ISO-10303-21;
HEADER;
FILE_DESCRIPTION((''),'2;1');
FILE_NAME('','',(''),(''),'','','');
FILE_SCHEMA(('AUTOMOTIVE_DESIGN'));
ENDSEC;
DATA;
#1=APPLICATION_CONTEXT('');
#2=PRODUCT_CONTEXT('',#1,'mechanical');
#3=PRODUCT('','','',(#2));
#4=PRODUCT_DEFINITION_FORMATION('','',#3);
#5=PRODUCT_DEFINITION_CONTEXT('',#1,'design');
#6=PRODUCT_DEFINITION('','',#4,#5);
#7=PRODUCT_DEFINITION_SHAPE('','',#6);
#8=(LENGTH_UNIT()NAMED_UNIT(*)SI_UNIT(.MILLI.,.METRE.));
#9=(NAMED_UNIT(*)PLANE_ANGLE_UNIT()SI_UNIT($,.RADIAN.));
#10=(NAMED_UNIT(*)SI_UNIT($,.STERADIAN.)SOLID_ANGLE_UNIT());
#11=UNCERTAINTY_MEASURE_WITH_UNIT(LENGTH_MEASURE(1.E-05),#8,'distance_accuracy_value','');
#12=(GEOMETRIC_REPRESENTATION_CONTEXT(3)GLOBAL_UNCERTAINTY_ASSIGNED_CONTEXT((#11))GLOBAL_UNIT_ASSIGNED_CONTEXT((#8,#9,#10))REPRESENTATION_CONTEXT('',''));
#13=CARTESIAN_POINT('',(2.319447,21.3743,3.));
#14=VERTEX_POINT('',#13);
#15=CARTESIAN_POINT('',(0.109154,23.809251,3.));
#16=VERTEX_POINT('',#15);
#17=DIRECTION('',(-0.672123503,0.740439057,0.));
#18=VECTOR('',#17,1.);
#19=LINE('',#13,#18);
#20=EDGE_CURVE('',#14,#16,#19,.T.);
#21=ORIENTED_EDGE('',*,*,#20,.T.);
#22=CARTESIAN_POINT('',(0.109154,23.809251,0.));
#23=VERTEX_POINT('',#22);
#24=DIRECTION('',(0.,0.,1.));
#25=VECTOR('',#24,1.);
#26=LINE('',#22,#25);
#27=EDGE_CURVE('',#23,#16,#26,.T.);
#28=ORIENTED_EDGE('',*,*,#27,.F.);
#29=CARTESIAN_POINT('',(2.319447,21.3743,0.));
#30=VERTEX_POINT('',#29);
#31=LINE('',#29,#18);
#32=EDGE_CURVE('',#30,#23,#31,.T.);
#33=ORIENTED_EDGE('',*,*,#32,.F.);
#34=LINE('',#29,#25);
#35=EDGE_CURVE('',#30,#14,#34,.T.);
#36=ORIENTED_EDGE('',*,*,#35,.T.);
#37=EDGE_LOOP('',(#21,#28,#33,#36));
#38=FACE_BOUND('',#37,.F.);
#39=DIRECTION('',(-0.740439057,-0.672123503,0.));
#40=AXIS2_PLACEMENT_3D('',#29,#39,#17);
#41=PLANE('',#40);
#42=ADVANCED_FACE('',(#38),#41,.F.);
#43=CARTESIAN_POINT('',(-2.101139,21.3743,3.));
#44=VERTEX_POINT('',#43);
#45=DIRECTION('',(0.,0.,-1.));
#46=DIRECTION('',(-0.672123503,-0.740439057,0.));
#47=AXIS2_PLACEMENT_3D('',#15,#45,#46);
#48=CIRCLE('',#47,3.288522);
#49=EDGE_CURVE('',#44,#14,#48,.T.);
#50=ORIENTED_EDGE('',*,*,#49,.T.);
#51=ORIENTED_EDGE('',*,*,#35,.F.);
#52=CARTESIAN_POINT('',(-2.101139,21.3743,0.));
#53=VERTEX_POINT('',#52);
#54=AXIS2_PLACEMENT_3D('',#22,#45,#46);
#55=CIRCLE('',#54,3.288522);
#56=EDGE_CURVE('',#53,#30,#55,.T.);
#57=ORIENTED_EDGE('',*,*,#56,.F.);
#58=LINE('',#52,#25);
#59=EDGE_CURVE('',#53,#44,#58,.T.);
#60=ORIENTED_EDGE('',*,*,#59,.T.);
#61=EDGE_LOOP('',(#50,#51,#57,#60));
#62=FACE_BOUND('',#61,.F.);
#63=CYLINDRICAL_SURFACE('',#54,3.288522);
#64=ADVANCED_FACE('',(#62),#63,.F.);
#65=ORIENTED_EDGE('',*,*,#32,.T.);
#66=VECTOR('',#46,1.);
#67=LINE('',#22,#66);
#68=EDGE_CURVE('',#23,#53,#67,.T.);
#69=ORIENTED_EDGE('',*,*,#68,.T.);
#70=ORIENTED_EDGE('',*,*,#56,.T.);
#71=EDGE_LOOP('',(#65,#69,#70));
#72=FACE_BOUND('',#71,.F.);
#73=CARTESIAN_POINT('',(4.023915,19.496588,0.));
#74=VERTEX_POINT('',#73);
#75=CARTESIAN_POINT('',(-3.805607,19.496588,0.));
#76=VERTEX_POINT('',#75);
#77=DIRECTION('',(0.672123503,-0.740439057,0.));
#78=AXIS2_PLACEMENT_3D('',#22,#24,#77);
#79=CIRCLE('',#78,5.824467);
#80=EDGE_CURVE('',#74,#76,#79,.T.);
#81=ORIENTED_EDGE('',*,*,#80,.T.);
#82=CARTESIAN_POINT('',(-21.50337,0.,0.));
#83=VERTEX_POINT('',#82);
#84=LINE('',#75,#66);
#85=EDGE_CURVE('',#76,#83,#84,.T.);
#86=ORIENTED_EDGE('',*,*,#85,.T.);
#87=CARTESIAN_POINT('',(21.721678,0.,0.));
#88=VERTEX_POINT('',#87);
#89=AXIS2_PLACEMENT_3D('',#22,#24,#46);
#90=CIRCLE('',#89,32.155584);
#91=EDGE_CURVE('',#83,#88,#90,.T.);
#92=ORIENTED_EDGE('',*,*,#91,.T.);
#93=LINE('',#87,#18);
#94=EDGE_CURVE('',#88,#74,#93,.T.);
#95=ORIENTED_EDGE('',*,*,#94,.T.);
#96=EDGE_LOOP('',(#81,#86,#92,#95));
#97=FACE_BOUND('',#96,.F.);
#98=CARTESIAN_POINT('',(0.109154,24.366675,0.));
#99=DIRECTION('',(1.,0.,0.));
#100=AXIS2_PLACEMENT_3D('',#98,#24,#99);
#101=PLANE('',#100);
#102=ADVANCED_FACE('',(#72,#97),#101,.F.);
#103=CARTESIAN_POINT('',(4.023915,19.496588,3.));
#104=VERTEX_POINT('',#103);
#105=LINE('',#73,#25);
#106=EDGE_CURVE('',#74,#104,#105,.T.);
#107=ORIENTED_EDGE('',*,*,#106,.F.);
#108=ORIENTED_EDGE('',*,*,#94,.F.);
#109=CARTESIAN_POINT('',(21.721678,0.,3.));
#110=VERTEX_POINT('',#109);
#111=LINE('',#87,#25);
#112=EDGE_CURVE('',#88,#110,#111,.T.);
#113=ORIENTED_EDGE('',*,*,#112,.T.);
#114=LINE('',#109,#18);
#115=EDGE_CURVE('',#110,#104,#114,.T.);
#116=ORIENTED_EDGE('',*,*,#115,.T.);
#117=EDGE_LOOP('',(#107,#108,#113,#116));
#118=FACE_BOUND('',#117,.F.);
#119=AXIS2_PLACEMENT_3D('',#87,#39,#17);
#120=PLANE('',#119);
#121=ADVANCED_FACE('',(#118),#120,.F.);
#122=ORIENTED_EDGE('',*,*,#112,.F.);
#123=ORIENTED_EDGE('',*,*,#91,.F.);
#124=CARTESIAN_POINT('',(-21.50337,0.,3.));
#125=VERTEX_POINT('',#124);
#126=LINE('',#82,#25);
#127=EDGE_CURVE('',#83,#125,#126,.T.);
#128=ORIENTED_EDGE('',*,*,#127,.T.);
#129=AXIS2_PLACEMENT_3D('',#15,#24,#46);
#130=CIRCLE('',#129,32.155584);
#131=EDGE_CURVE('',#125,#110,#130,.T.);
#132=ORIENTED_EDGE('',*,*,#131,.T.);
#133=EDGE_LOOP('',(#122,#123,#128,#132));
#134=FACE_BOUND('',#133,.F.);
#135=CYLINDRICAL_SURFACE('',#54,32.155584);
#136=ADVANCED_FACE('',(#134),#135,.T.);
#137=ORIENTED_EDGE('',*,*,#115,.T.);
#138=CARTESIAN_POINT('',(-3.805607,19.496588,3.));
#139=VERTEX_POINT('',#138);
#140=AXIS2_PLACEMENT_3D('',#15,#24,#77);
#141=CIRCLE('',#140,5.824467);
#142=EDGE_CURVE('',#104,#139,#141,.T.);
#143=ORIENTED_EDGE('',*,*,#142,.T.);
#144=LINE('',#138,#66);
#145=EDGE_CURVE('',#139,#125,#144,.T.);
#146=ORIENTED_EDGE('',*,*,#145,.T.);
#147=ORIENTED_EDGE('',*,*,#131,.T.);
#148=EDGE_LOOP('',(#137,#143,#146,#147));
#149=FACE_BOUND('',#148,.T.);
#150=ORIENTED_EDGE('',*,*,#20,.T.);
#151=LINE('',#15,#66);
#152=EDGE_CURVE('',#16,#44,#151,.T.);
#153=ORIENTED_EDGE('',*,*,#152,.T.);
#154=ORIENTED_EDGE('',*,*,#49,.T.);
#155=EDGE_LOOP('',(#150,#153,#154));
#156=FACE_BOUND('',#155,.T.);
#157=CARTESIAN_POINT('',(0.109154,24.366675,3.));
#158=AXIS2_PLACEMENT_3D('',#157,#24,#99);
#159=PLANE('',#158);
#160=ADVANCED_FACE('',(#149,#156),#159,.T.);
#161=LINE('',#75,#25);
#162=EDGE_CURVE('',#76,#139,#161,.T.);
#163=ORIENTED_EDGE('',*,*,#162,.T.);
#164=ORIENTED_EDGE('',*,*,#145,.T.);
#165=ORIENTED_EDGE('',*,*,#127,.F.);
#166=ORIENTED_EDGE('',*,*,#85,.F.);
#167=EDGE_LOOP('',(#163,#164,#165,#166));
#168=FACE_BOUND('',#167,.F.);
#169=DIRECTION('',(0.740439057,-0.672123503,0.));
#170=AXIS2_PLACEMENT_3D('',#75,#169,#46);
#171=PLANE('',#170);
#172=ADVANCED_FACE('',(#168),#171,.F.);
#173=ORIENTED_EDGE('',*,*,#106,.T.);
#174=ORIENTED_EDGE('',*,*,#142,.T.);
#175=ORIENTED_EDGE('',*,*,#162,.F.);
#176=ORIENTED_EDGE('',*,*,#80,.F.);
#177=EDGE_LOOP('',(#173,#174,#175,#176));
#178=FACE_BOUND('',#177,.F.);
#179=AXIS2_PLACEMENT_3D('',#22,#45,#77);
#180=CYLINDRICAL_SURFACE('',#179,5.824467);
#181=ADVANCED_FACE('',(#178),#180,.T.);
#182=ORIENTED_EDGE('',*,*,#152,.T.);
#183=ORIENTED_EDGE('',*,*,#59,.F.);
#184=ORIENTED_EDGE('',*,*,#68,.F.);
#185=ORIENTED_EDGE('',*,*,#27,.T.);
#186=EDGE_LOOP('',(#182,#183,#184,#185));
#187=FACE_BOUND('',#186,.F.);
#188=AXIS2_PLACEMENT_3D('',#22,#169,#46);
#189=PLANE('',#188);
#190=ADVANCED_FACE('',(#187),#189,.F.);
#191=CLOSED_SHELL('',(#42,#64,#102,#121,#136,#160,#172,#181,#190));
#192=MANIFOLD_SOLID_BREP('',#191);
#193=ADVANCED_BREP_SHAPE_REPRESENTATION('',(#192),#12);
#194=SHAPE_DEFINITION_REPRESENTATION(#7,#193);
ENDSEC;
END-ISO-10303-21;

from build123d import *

# Parameters (mm, degrees)
F1_DEPTH = 3
F6_DEPTH = 3


# Not quite as in the source:
# - the program builds the solid bodies; features that only make, move or delete a surface that nothing else refers to are left out


with BuildPart() as f1:
    # F0 (on Top) → F1 (new body)
    with BuildSketch(Plane.XY):
        with BuildLine():
            Line((-3.8056071322, 19.4965880074), (-21.5033702552, 0))
            ThreePointArc((-21.5033702552, 0), (0.1091537997, -8.3463338313), (21.7216778547, 0))
            Line((21.7216778547, 0), (4.0239147316, 19.4965880074))
            Line((4.0239147316, 19.4965880074), (2.3194467965, 21.374300398))
            Line((2.3194467965, 21.374300398), (0.1091537997, 23.8092506024))
            Line((0.1091537997, 23.8092506024), (-2.1011391971, 21.374300398))
            Line((-2.1011391971, 21.374300398), (-3.8056071322, 19.4965880074))
        make_face()
        with BuildLine():
            Line((-15.8273540437, 0), (0.1091537997, 23.8092506024))
            Line((0.1091537997, 23.8092506024), (16.0456616431, 0))
            ThreePointArc((16.0456616431, 0), (0.1091537997, -4.8412763821), (-15.8273540437, 0))
        make_face(mode=Mode.SUBTRACT)
        with BuildLine():
            Line((16.0456616431, 0), (0.1091537997, 23.8092506024))
            Line((0.1091537997, 23.8092506024), (-15.8273540437, 0))
            ThreePointArc((-15.8273540437, 0), (0.1091537997, -4.8412763821), (16.0456616431, 0))
        make_face()
        with BuildLine():
            Line((-10.592116043, 0), (0.1091537997, 23.8092506024))
            Line((0.1091537997, 23.8092506024), (11.3627482206, 0))
            ThreePointArc((11.3627482206, 0), (0.3853160888, -2.256488537), (-10.592116043, 0))
        make_face(mode=Mode.SUBTRACT)
        with BuildLine():
            Line((11.3627482206, 0), (0.1091537997, 23.8092506024))
            Line((0.1091537997, 23.8092506024), (-10.592116043, 0))
            ThreePointArc((-10.592116043, 0), (0.3853160888, -2.256488537), (11.3627482206, 0))
        make_face()
    extrude(amount=F1_DEPTH)

    # F0 (on Top) → F6 (join)
    with BuildSketch(Plane.XY):
        with BuildLine():
            ThreePointArc((4.0239147316, 19.4965880074), (0.1091537997, 29.6337172572), (-3.8056071322, 19.4965880074))
            Line((-3.8056071322, 19.4965880074), (-2.1011391971, 21.374300398))
            ThreePointArc((-2.1011391971, 21.374300398), (0.1091537997, 27.0977727066), (2.3194467965, 21.374300398))
            Line((2.3194467965, 21.374300398), (4.0239147316, 19.4965880074))
        make_face()
    extrude(amount=F6_DEPTH)


solid = f1.part
